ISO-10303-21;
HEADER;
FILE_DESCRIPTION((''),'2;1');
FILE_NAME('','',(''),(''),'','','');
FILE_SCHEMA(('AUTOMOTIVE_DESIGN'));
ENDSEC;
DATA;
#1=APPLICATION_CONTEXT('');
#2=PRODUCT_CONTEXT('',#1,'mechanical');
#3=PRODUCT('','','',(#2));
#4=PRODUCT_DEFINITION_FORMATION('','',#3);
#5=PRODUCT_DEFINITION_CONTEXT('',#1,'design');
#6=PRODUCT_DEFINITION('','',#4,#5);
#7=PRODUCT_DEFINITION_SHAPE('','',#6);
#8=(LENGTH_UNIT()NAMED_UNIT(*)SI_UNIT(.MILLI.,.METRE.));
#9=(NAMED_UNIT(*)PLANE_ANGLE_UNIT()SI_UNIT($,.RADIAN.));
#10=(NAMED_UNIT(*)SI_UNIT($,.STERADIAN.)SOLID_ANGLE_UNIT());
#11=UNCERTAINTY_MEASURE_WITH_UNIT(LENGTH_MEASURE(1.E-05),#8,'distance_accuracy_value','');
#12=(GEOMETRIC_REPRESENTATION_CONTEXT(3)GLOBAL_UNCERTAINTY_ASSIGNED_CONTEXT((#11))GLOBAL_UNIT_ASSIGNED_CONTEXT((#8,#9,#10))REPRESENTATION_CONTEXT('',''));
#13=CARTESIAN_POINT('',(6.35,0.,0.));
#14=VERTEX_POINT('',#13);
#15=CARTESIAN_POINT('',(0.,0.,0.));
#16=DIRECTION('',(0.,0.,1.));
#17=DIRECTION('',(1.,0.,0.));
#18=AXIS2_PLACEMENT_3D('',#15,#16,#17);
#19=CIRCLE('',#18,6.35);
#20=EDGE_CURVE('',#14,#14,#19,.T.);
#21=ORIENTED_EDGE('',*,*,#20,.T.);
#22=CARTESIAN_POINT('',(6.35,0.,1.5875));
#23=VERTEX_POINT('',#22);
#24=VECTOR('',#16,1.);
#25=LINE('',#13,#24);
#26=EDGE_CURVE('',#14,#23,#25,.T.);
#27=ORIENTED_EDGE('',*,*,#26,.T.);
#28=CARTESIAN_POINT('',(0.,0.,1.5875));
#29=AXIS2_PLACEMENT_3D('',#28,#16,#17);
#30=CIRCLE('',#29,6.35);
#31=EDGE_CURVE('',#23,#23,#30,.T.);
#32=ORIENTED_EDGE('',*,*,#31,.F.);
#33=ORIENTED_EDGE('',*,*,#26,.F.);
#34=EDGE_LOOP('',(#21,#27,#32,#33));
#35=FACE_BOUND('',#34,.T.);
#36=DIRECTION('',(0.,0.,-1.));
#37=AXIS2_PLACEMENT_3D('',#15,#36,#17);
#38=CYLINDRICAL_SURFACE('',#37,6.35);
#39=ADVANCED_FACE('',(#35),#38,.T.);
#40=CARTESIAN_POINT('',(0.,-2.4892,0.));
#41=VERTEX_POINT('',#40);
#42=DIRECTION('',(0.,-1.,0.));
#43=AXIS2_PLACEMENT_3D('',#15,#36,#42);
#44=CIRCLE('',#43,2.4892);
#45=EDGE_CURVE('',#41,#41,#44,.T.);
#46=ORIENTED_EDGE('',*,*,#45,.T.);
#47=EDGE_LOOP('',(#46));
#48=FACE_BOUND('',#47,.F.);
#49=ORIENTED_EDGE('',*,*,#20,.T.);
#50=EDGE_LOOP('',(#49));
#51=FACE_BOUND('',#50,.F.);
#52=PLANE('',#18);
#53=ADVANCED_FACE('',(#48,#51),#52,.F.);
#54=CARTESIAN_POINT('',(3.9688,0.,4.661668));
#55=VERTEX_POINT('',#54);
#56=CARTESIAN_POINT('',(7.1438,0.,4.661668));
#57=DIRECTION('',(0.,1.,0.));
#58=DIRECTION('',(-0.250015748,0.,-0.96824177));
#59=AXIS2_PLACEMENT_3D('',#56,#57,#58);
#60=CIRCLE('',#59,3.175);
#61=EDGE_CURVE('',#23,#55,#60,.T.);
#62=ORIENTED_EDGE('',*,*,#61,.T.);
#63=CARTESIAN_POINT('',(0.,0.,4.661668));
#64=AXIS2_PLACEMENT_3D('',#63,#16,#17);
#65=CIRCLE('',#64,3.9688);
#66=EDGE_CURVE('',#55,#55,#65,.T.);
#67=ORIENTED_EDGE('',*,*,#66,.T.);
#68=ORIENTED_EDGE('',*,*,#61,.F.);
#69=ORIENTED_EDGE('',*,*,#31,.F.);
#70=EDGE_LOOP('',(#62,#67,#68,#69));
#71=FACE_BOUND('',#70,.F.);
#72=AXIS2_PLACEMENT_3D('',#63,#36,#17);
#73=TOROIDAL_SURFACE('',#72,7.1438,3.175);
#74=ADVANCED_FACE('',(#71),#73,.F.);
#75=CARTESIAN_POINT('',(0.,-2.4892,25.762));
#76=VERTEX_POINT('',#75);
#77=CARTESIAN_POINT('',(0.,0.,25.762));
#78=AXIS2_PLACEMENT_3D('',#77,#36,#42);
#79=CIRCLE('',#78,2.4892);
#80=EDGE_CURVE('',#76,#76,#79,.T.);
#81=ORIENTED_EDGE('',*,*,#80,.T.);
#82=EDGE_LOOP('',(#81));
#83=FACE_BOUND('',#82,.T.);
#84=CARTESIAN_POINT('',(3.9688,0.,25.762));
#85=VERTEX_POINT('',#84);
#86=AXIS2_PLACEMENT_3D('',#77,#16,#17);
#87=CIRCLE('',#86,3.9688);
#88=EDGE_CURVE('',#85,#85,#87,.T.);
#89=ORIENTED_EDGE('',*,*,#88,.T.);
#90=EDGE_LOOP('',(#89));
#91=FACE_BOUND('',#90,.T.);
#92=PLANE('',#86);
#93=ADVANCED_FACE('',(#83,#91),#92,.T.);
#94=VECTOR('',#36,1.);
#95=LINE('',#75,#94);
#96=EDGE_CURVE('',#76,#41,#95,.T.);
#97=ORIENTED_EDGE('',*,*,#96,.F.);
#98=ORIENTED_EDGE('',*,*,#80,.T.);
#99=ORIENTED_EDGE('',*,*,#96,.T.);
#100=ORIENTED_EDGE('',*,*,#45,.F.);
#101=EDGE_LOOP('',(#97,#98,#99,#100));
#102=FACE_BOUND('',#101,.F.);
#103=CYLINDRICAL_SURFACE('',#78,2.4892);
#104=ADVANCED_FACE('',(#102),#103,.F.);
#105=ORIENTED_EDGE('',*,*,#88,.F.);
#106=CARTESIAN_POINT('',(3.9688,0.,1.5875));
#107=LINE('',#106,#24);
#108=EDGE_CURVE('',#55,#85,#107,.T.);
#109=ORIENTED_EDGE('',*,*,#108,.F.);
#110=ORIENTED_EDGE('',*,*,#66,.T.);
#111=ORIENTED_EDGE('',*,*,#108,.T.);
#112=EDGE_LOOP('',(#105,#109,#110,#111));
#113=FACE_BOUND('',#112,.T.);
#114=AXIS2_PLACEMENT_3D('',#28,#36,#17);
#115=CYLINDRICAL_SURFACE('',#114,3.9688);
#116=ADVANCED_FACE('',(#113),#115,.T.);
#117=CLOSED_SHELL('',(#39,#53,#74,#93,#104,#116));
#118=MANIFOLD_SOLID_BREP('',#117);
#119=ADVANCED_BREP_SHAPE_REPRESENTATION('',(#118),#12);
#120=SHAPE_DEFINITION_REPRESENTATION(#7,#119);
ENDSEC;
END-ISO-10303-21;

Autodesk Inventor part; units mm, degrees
ref_plane "YZ Plane" through (0, 0, 0) normal (1, 0, 0) x (0, 1, 0)
ref_plane "XZ Plane" through (0, 0, 0) normal (0, 1, 0) x (-1, 0, 0)
ref_plane "XY Plane" through (0, 0, 0) normal (0, 0, 1) x (1, 0, 0)
sketch "Sketch1" plane through (0, 0, 0) normal (0, 0, 1) x (1, 0, 0)
  circle A0 centre (0, 0) radius 6.35
  dimension "d0" = 12.7
extrude "Extrusion1" add sketch "Sketch1" along normal blind 1.5875
sketch "Sketch2" plane through (0, 0, 1.5875) normal (0, 0, 1) x (1, 0, 0)
  circle A0 centre (0, 0) radius 6.35 projected
  circle A1 centre (0, 0) radius 3.9688
  dimension "d3" = 7.9375
extrude "Extrusion2" add sketch "Sketch2" along normal blind 24.1745 contours A1
fillet "Fillet1" radius 3.175 1 edges at (-3.9688, 0, 1.5875)
sketch "Sketch3" plane through (0, 0, 25.762) normal (0, 0, 1) x (1, 0, 0)
  circle A0 centre (0, 0) radius 3.9687 projected
hole "Hole1" at (0, 0, 25.762) direction (0, 0, -1) diameter 4.9784 end through all clearance for "Flat Head Machine Screw (82)" size "#10" standard "Ansi Unified Screw Threads"
properties part number "Pneumatic Standoff Curved" material "Aluminum 6061"
